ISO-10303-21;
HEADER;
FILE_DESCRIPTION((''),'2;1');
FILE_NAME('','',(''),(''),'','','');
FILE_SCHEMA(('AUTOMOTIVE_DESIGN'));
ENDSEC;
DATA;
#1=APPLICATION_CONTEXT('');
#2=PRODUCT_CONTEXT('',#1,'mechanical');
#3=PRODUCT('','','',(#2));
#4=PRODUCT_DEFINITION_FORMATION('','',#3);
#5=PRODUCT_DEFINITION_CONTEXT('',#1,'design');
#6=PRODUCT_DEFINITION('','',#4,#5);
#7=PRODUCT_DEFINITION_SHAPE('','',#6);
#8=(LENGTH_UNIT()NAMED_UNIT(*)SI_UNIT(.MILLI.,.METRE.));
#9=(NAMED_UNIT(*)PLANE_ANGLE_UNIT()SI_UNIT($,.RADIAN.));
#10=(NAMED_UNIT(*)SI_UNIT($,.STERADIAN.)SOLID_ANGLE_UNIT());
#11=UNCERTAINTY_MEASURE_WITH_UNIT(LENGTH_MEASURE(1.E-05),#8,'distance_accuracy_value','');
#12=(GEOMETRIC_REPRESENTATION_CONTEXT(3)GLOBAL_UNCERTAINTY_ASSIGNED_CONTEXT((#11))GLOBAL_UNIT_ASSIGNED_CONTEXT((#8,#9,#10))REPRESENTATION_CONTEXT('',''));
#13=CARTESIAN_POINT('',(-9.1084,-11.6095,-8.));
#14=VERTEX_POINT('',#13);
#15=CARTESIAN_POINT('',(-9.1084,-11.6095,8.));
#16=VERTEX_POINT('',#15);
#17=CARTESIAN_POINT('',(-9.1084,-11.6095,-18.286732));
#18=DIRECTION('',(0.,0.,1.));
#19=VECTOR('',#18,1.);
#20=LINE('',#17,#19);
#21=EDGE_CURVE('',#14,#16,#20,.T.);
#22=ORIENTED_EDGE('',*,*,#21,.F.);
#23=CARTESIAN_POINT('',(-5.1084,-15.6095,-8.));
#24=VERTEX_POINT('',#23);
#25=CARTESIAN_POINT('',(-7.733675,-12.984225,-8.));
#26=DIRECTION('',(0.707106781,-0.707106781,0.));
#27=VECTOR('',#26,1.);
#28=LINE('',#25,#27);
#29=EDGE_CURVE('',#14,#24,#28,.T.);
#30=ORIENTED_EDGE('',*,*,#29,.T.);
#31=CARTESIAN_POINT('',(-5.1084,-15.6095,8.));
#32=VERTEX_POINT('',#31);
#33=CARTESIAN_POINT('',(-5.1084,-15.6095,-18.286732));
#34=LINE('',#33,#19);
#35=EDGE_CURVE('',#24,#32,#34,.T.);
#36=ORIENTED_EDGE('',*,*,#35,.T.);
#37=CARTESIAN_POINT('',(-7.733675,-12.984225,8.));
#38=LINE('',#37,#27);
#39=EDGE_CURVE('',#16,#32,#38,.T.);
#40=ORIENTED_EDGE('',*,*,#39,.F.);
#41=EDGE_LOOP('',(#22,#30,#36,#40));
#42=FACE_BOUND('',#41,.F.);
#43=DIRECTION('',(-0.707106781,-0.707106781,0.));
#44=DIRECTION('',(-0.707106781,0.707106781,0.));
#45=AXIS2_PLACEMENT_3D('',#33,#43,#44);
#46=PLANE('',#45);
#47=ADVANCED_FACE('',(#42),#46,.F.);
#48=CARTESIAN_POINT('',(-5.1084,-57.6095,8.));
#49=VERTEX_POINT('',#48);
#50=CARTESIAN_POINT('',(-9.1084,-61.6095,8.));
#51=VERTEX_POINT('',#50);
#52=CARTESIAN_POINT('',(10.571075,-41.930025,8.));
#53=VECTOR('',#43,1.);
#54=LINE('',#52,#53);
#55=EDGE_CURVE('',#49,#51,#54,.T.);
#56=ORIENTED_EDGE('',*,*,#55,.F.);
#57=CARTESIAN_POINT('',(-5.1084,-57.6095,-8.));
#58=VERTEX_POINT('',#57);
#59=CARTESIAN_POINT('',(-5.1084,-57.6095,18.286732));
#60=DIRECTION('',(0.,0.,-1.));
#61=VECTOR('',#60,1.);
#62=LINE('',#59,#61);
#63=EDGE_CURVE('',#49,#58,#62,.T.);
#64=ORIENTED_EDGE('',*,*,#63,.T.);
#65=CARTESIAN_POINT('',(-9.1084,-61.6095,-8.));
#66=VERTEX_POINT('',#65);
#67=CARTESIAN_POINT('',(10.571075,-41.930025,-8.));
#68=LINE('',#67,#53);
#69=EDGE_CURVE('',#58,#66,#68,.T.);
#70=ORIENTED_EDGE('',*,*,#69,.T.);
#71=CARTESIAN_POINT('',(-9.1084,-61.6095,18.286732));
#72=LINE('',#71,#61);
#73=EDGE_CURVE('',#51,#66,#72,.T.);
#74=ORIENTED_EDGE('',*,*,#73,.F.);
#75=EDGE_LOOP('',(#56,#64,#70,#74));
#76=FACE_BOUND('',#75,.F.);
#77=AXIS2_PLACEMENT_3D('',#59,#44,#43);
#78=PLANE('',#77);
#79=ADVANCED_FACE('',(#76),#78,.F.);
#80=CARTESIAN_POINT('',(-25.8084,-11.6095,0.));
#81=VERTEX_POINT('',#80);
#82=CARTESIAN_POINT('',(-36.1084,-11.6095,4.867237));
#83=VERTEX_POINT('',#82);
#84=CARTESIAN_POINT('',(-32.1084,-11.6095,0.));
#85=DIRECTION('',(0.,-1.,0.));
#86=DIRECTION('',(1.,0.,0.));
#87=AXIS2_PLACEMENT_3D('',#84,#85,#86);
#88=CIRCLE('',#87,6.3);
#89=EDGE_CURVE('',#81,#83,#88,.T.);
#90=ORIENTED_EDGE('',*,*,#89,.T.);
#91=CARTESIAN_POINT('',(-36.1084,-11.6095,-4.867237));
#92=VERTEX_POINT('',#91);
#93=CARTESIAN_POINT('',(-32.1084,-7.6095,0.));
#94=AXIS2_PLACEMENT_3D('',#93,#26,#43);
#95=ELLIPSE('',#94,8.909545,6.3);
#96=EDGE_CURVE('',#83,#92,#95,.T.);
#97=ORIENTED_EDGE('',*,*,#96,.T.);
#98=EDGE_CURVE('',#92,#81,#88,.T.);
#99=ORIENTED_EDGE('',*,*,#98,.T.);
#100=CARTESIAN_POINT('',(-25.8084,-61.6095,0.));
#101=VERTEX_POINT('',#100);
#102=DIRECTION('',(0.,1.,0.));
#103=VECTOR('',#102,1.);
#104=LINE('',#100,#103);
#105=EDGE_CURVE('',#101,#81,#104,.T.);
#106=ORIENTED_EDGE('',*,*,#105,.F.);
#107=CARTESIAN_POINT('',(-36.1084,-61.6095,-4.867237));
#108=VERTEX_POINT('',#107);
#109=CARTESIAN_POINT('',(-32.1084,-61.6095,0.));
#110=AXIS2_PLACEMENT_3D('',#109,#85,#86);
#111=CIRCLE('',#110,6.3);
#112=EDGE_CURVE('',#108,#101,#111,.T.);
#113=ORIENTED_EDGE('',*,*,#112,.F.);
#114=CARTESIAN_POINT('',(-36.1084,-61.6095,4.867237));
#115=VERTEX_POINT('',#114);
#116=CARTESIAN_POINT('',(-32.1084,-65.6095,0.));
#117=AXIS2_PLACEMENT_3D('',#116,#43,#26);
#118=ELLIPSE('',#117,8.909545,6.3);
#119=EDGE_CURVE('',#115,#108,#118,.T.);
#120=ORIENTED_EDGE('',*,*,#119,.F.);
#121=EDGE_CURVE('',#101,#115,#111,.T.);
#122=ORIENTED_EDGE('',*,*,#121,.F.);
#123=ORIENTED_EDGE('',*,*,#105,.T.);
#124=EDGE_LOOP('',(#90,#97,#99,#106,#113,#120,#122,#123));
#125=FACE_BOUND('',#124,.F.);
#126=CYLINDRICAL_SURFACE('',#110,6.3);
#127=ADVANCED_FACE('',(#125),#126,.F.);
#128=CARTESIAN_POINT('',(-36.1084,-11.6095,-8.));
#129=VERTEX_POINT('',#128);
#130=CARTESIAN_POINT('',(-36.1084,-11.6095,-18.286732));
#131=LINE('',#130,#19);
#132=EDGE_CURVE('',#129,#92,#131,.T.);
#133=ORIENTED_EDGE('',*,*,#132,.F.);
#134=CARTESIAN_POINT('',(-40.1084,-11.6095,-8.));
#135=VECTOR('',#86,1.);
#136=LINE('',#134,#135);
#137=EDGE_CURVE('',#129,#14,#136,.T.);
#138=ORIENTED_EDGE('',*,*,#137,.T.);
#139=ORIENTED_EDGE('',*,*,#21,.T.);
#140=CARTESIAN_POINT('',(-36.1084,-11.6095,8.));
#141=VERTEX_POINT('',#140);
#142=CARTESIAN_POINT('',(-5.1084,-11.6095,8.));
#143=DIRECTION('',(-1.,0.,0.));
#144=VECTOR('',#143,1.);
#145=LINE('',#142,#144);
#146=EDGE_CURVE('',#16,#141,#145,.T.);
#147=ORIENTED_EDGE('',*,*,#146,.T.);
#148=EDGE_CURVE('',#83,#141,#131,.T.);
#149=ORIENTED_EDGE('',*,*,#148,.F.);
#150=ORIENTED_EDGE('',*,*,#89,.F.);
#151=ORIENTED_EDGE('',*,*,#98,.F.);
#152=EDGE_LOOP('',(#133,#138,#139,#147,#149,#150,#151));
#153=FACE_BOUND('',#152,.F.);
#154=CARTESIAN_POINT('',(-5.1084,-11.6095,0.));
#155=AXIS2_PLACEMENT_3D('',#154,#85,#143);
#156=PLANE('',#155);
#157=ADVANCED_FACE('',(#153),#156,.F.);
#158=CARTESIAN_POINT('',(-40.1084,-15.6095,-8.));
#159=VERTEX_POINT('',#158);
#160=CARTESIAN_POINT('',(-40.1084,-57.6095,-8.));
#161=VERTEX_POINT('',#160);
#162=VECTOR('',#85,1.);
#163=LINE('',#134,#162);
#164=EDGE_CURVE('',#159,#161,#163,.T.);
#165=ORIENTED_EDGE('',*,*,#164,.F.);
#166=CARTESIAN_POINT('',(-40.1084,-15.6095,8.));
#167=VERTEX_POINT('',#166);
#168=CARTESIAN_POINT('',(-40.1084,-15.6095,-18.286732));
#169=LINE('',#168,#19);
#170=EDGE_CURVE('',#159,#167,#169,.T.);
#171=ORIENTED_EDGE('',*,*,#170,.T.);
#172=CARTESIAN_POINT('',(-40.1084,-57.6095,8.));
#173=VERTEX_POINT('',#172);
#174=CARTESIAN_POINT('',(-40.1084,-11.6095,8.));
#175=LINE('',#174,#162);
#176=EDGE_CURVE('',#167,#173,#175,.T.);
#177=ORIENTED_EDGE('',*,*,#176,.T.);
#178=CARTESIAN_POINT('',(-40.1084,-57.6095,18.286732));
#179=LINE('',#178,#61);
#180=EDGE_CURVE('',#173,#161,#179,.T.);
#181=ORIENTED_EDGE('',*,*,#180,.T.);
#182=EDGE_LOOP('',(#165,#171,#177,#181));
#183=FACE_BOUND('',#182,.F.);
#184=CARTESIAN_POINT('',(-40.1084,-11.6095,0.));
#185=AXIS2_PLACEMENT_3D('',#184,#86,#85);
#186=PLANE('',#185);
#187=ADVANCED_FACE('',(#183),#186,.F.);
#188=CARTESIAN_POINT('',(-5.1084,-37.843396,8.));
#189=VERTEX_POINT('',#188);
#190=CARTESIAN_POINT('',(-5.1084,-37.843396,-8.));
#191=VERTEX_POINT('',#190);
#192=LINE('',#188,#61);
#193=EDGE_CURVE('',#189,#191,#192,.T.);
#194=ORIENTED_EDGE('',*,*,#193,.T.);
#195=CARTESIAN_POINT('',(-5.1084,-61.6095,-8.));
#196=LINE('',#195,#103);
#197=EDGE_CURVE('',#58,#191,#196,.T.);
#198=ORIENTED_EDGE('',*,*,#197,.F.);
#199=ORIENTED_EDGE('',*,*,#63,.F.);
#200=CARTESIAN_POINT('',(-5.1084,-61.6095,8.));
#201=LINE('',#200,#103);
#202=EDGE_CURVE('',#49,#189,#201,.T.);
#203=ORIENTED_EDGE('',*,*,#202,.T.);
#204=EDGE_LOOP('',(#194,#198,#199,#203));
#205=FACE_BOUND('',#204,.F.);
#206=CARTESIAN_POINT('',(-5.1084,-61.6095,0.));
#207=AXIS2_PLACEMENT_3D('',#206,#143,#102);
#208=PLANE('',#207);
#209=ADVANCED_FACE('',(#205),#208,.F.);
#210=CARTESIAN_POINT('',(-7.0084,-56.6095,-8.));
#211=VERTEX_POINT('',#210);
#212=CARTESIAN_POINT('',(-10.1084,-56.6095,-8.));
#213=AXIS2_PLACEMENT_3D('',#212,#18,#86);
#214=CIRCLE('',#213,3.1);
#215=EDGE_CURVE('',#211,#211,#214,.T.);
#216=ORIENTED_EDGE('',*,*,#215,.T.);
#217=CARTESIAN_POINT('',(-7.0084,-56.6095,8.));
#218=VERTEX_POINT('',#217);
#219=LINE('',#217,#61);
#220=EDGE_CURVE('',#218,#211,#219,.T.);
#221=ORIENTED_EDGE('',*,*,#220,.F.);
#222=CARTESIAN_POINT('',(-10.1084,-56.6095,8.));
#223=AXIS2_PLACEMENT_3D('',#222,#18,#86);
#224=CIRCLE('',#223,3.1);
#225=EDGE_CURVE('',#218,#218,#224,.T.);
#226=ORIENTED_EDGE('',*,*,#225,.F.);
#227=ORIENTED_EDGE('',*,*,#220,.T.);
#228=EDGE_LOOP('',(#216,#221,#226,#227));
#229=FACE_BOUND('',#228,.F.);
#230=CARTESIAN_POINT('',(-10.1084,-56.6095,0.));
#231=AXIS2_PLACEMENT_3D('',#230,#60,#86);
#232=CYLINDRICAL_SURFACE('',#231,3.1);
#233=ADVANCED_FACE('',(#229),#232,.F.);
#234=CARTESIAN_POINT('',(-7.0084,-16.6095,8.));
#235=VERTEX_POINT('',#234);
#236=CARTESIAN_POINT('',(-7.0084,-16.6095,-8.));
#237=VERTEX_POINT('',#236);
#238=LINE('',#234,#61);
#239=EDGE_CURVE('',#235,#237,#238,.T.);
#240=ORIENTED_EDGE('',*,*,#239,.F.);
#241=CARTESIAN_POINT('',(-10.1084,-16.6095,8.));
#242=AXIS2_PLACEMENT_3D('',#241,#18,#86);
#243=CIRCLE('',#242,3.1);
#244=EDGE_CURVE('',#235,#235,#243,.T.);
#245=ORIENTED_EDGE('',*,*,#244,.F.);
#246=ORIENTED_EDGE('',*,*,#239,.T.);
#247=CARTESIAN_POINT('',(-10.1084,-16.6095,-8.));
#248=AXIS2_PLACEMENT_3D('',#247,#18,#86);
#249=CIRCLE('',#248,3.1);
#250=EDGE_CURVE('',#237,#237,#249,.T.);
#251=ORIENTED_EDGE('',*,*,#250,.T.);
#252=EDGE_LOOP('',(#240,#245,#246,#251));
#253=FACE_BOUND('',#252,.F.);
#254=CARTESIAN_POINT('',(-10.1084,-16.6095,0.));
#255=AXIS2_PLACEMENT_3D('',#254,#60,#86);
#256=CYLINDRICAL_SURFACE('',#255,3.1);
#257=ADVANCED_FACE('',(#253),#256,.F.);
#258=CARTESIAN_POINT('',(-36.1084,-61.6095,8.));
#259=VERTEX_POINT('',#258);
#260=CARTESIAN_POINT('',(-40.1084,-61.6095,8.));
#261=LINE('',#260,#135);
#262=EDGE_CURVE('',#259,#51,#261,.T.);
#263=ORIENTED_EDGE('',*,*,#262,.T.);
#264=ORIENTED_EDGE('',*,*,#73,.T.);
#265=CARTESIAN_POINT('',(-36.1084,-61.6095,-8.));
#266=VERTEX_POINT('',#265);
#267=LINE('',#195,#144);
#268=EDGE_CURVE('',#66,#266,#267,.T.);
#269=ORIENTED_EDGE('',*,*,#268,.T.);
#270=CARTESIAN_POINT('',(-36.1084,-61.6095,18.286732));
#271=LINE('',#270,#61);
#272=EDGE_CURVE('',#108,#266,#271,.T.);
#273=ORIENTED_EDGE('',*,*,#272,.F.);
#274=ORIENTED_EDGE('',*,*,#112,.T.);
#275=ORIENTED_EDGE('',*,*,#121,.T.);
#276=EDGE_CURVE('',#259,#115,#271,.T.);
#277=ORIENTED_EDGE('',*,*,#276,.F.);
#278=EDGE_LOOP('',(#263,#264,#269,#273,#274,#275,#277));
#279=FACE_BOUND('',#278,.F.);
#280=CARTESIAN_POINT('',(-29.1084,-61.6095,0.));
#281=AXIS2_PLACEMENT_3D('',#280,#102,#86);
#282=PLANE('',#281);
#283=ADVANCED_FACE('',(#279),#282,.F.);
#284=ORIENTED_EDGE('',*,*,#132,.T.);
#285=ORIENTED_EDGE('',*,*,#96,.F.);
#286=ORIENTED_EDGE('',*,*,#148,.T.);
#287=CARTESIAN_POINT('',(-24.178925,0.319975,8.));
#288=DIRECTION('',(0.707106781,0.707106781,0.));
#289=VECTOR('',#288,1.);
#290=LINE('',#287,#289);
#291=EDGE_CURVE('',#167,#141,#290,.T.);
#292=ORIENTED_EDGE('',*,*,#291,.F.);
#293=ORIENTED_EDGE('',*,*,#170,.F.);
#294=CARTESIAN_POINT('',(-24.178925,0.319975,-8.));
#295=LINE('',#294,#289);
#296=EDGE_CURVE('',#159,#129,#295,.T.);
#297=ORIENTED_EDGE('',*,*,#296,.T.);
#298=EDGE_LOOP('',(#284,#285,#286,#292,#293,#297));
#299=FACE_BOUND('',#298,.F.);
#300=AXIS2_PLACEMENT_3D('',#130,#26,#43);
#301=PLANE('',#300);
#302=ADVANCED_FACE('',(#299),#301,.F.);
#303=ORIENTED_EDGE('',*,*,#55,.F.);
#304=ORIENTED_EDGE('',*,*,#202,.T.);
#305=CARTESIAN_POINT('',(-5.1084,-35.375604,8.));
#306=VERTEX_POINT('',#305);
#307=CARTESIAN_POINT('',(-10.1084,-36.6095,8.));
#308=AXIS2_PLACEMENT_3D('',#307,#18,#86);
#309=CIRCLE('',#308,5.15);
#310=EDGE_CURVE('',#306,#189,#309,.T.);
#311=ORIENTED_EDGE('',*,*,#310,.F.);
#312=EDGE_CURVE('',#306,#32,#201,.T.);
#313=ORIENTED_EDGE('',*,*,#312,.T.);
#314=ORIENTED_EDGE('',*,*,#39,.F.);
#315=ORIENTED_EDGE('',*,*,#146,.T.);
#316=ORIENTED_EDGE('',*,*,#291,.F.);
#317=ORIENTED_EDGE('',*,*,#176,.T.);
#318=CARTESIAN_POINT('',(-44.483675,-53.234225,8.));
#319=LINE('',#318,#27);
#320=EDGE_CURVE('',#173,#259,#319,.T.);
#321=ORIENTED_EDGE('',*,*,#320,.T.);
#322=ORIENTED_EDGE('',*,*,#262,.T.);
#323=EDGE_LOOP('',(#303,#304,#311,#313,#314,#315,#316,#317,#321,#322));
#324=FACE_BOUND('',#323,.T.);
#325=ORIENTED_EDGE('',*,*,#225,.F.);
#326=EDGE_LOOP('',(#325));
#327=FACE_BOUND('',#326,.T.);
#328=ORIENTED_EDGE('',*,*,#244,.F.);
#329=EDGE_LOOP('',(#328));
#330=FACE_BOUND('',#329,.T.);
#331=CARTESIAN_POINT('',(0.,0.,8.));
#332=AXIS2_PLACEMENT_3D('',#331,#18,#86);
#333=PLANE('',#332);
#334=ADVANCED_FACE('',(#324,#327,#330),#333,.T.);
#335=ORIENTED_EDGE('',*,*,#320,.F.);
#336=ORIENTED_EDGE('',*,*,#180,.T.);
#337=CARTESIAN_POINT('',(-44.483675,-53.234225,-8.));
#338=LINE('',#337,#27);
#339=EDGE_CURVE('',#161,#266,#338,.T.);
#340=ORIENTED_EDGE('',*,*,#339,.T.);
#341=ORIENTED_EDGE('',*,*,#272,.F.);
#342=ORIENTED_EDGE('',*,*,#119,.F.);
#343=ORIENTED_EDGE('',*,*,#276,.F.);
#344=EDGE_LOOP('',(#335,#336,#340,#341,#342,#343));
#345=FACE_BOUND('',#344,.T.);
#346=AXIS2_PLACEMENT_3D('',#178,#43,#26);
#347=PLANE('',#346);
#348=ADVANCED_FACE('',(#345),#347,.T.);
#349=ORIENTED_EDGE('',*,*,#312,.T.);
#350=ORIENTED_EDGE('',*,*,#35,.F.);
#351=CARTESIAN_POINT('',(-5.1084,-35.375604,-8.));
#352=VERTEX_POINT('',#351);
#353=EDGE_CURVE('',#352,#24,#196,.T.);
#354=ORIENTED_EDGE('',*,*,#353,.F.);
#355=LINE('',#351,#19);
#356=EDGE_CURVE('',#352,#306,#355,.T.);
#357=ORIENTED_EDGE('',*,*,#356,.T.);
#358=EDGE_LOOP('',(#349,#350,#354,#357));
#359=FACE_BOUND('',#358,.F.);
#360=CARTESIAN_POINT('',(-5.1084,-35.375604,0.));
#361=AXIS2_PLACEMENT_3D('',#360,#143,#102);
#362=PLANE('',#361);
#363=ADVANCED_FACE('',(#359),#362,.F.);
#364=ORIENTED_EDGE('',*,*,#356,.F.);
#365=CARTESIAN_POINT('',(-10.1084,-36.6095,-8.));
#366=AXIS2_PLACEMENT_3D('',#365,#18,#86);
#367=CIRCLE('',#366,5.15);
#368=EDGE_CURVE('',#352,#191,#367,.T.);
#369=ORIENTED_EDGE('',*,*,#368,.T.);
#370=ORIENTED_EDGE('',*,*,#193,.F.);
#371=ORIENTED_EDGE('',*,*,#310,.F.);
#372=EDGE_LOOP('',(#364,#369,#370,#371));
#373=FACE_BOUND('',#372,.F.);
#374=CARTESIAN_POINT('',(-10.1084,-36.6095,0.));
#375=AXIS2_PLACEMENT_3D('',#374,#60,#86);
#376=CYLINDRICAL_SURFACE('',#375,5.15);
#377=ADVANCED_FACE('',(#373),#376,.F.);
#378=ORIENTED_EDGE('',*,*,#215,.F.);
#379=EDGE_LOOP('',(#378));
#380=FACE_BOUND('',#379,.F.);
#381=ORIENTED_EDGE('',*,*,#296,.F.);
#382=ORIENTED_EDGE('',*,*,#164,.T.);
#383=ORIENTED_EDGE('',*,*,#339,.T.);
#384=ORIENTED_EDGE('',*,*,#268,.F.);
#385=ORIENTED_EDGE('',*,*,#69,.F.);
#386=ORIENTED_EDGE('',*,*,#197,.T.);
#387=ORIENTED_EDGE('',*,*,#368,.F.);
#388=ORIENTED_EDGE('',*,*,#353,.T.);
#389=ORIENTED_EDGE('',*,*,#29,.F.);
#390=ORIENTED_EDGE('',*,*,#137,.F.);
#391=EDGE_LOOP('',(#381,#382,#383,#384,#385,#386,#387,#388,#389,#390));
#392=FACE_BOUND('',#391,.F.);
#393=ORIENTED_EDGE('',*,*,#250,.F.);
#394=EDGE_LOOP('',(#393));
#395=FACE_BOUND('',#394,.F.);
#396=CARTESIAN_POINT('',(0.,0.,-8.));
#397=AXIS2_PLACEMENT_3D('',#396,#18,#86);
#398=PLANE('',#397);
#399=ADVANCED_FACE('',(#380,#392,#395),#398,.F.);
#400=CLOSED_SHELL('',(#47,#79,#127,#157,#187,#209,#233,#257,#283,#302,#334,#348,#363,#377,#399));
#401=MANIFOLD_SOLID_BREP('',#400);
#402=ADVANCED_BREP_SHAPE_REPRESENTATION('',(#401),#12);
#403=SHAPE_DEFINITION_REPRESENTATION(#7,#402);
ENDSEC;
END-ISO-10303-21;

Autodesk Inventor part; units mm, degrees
ref_plane "YZ Plane" through (0, 0, 0) normal (1, 0, 0) x (0, 1, 0)
ref_plane "XZ Plane" through (0, 0, 0) normal (0, 1, 0) x (-1, 0, 0)
ref_plane "XY Plane" through (0, 0, 0) normal (0, 0, 1) x (1, 0, 0)
ref_plane "Work Plane1" through (0, 0, 0) normal (0, 0, 1) x (1, 0, 0)
sketch "Sketch1" plane through (0, 0, 0) normal (0, 0, 1) x (1, 0, 0)
  circle A0 centre (-10.1084, -16.6095) radius 3 construction
  circle A1 centre (-10.1084, -56.6095) radius 3 construction
  circle A2 centre (-10.1084, -36.6095) radius 5.15 projected
  line L0 (-29.1084, -220.5) -> (-29.1084, 29.5)
  line L1 (-35.1084, -220.5) -> (-35.1084, 29.5)
  line L2 (-40.1084, -61.6095) -> (-5.1084, -61.6095)
  line L3 (-5.1084, -61.6095) -> (-5.1084, -11.6095)
  line L4 (-5.1084, -11.6095) -> (-40.1084, -11.6095)
  line L5 (-40.1084, -11.6095) -> (-40.1084, -61.6095)
  line L6 (-40.1084, -61.6095) -> (-5.1084, -11.6095) construction
  line L7 (-5.1084, -61.6095) -> (-40.1084, -11.6095) construction
  circle A3 centre (-10.1084, -16.6095) radius 3.1
  circle A4 centre (-10.1084, -56.6095) radius 3.1
  point P0 (0, 0)
  point P1 (-22.6084, -36.6095)
  point P2 (-5.1084, -35.3756)
  point P3 (-5.1084, -37.8434)
  dimension "d0" = 35
  dimension "d1" = 50
  dimension "d2" = 5
  dimension "d3" = 6.2
  dimension "d4" = 6.2
extrude "Extrusion1" add sketch "Sketch1" along normal mid plane 16 contours A2 L3 L2 L0 L4 | L0 L2 L1 L4 | L1 L2 L5 L4
sketch "Sketch2" plane through (-40.1084, -61.6095, 8) normal (0, -1, 0) x (1, 0, 0)
  circle A0 centre (8, -8) radius 6 projected
  circle A1 centre (8, -8) radius 6.3
  point P0 (40.1084, -8)
  dimension "d7" = 0.3
extrude "Extrusion2" cut sketch "Sketch2" against normal through all contours A0 | A1
chamfer "Chamfer1" distance 4 angle 45 4 edges at (-5.1084, -61.6095, 0) (-5.1084, -11.6095, 0) (-40.1084, -61.6095, 0) (-40.1084, -11.6095, 0)
properties part number "06_OPENTRONS_Microscope_Extraslide_slide"
